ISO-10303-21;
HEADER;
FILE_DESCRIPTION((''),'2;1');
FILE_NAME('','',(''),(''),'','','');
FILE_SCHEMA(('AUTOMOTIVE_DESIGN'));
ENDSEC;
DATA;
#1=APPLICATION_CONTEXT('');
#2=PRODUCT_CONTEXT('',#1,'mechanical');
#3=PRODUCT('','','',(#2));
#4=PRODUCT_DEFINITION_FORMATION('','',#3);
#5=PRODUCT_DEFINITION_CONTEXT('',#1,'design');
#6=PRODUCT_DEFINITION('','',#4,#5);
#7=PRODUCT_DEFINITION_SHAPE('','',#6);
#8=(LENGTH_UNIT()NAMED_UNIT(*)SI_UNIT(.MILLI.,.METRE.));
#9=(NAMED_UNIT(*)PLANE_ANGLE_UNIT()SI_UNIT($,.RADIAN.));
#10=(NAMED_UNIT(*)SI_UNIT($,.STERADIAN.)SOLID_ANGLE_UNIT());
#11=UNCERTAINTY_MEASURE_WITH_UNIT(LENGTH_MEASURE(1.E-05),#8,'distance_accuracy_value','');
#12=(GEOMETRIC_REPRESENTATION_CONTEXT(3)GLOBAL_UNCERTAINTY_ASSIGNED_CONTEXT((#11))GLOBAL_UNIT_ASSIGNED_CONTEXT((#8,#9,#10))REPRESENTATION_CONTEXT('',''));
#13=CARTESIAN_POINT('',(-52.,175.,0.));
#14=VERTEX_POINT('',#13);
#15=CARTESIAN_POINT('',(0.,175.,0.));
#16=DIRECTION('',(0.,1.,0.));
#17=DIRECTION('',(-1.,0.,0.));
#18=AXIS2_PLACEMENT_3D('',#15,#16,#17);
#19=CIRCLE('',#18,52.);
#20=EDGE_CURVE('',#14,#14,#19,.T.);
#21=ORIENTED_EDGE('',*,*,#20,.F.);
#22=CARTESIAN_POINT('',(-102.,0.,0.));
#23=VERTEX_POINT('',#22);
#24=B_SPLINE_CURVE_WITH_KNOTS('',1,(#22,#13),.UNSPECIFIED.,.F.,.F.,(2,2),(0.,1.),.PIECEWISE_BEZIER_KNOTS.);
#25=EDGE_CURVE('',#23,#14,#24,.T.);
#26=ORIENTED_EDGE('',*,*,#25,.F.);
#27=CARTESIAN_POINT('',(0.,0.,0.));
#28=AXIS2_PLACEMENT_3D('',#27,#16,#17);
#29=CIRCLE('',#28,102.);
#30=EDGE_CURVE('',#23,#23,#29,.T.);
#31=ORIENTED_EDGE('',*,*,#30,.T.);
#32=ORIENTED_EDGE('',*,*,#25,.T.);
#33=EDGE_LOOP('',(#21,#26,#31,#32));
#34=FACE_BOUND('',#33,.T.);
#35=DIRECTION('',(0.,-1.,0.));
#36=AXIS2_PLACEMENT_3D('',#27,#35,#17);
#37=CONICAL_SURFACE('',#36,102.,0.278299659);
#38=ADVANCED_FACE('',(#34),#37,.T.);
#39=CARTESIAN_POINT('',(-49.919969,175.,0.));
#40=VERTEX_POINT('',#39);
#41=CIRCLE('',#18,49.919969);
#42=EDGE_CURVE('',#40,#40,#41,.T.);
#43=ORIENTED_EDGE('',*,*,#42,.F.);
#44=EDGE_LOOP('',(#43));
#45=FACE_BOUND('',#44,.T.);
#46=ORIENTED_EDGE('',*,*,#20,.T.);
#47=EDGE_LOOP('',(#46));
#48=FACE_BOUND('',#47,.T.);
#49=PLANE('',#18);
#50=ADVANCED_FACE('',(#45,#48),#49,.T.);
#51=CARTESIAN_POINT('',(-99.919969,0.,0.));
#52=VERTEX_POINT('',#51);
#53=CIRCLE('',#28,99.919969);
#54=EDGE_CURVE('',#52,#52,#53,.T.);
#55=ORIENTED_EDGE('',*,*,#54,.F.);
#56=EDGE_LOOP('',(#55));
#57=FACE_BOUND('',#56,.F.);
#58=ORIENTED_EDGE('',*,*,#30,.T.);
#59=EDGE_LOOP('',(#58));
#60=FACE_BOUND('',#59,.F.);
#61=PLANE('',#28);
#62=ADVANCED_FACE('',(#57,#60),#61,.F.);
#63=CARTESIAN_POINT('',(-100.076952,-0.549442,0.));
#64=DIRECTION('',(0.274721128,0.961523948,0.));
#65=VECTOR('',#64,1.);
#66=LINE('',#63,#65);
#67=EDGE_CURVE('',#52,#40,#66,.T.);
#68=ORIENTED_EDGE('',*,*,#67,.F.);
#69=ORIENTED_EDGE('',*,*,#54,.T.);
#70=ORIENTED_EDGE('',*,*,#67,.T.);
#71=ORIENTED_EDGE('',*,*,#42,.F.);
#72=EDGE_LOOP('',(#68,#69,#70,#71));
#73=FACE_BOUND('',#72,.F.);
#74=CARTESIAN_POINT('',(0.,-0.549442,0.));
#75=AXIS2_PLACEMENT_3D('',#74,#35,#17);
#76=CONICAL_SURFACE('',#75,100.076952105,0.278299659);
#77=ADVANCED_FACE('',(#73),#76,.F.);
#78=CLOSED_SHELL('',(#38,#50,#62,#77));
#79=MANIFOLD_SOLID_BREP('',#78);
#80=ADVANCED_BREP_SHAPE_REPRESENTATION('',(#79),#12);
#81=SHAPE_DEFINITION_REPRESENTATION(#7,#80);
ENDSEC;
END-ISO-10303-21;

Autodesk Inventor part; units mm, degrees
ref_plane "YZ Plane" through (0, 0, 0) normal (1, 0, 0) x (0, 1, 0)
ref_plane "XY Plane" through (0, 0, 0) normal (0, 0, 1) x (1, 0, 0)
sketch "Szkic6" plane through (0, 0, 0) normal (0, 1, 0) x (-1, 0, 0)
  circle A0 centre (0, 0) radius 102
  dimension "d33" = 204
ref_plane "Płaszczyzna konstrukcyjna1" through (0, 175, 0) normal (0, 1, 0) x (-1, 0, 0)
sketch "Szkic7" plane through (0, 175, 0) normal (0, 1, 0) x (-1, 0, 0)
  circle A0 centre (0, 0) radius 52
  dimension "d35" = 104
loft "Wyciągnięcie złożone1" add profiles "Szkic6", "Szkic7"
shell "Skorupa1" thickness 2 removed faces 2 at (-18.5271, 175, 25.061) at (-23.2432, 0, 54.3964)
equation "\"d33\" = OD1"
equation "\"d35\" = OD2"
equation "\"d52\" = THK"
equation "\"SzerokośćGięciaPodcięcia\" = Grubość"
equation "\"RozmiarPodcięciaNarożnika\" = 4 * Grubość"
equation "\"PromieńPrzejścia\" = PromieńGięcia"
equation "\"Rozmiar_promienia_Jacobiego\" = PromieńGięcia"
equation "\"Wielk_odstępu\" = Grubość"
equation "\"d2\" = PromieńGięcia"
equation "\"d23\" = PromieńGięcia"
equation "\"OD1\" = 204"
equation "\"OD2\" = 104"
equation "\"L\" = 175"
equation "\"THK\" = 2"
equation "\"d34\" = L"
equation "\"Grubość\" = 1.5"
equation "\"PromieńGięcia\" = 3"
properties part number "Redukcja symetryczna Ø204x104x2 L=175" material "304"
